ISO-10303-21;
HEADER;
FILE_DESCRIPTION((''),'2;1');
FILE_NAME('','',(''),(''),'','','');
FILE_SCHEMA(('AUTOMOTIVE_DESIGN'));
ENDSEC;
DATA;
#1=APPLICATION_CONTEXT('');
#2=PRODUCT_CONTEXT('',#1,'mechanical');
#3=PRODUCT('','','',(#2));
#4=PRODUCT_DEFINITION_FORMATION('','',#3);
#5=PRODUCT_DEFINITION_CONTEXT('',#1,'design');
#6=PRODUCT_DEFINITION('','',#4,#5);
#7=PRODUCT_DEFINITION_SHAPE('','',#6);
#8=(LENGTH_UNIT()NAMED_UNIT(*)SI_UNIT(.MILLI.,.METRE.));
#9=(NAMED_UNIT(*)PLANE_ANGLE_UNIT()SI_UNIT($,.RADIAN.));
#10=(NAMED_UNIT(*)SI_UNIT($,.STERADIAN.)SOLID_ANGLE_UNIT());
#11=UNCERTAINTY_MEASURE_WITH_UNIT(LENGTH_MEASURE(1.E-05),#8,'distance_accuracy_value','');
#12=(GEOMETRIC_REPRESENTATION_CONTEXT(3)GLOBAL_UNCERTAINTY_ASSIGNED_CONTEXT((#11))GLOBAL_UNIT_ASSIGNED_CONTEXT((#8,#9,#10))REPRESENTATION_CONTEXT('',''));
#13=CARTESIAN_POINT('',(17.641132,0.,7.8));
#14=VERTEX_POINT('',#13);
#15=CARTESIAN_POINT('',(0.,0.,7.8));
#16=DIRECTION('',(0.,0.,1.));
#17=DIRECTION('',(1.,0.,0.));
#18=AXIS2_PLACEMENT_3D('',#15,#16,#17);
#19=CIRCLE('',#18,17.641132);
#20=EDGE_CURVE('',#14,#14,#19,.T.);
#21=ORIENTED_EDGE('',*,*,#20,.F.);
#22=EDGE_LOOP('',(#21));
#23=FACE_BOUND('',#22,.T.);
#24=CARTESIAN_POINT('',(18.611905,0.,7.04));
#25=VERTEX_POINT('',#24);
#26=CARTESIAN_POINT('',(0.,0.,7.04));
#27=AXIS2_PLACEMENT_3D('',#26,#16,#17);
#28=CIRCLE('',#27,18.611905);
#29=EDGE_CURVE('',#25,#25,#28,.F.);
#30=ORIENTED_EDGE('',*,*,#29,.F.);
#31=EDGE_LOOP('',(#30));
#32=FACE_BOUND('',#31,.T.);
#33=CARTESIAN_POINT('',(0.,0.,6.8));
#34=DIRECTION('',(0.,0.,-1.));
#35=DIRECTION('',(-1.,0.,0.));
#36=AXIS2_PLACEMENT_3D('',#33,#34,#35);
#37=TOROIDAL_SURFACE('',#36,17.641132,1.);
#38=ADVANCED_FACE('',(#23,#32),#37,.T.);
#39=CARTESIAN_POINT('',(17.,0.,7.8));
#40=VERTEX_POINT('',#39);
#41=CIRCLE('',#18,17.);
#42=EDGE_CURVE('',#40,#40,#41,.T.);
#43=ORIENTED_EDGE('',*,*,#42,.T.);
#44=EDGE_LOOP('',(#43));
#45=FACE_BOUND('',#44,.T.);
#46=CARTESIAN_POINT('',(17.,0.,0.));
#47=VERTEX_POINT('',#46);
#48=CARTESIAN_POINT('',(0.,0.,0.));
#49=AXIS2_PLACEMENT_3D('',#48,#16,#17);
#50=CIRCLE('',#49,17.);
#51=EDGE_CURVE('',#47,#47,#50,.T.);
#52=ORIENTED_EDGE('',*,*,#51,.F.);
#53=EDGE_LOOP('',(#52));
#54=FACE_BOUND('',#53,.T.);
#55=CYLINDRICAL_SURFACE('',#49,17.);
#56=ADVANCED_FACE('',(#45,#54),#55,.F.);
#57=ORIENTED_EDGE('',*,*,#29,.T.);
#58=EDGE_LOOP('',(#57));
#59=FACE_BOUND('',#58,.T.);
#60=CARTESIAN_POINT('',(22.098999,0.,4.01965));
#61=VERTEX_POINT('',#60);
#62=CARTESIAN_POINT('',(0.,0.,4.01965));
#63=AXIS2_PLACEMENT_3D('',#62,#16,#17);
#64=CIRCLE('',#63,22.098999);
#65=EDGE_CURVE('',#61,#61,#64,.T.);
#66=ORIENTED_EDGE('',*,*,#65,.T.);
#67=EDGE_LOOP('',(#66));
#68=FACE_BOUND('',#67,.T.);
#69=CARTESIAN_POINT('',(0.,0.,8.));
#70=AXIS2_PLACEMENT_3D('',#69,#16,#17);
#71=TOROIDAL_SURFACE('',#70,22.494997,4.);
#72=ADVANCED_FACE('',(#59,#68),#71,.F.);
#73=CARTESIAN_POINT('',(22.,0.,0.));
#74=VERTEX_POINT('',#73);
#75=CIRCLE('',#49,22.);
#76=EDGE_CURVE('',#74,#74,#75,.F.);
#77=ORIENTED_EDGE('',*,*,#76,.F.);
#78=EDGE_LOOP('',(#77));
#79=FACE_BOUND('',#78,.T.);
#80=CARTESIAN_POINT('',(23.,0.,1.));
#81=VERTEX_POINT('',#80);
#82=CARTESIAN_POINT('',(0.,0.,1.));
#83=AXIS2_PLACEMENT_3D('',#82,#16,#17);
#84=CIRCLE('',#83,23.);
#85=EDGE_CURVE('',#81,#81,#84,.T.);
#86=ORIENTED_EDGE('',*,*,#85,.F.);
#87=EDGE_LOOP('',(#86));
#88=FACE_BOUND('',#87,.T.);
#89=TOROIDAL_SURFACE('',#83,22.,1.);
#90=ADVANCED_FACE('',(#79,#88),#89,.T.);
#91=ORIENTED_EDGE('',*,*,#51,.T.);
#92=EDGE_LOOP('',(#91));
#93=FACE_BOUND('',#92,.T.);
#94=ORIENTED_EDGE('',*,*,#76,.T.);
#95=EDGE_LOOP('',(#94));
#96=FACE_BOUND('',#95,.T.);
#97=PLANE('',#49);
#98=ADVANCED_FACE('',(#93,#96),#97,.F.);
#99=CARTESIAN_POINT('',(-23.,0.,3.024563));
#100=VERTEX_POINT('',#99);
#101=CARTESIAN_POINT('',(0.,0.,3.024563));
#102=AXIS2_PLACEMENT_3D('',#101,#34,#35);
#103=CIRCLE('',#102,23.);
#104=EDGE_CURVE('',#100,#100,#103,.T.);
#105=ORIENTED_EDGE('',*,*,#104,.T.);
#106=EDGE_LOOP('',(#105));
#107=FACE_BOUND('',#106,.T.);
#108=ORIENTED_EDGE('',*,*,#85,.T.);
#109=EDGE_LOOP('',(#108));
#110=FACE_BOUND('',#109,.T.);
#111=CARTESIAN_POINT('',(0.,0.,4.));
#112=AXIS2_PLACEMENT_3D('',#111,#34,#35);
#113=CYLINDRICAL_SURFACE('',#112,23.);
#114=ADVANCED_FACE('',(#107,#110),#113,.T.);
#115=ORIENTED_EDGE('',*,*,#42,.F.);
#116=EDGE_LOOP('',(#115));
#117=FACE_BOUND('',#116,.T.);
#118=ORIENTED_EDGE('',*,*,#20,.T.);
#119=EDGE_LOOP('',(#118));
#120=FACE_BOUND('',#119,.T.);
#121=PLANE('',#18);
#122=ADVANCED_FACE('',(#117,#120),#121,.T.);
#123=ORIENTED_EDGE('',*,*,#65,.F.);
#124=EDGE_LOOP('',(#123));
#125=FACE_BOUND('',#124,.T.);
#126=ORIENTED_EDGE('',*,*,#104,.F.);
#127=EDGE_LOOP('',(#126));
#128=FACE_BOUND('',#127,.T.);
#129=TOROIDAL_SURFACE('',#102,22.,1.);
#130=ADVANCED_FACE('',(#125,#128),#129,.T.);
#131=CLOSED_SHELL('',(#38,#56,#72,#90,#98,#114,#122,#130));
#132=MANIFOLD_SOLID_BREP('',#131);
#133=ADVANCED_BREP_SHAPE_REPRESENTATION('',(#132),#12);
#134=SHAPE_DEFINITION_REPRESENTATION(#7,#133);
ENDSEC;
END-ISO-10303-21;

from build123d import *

# Parameters (mm, degrees)
SKETCH1_R               = 23
BOSS_EXTRUDE1_DEPTH     = 4
CUT_EXTRUDE1_DEPTH      = 33.771939216
CUT_EXTRUDE1_DEPTH_BACK = 33.771939216
SKETCH2_R               = 17
BOSS_EXTRUDE2_START     = 3.8
SKETCH3_R               = 18.5
SKETCH3_R_2             = 17
BOSS_EXTRUDE2_DEPTH     = 3.8
FILLET1_R               = 4
FILLET2_R               = 1
FILLET3_R               = 1


with BuildPart() as part:
    # Sketch1 → Boss-Extrude1 (new body)
    with BuildSketch(Plane.XY):
        Circle(SKETCH1_R)
    extrude(amount=BOSS_EXTRUDE1_DEPTH)

    # Sketch2 → Cut-Extrude1 (cut, two sides: drawn at the far end of the back side and taken through both)
    with BuildSketch(Plane.XY.offset(4).offset(-CUT_EXTRUDE1_DEPTH_BACK)):
        Circle(SKETCH2_R)
    extrude(amount=CUT_EXTRUDE1_DEPTH + CUT_EXTRUDE1_DEPTH_BACK, mode=Mode.SUBTRACT)

    # Sketch3 → Boss-Extrude2 (add)
    with BuildSketch(Plane.XY.offset(4).offset(BOSS_EXTRUDE2_START)):
        with Locations(Location((0, 0, 0), (0, 0, 180))):
            Circle(SKETCH3_R)
        Circle(SKETCH3_R_2, mode=Mode.SUBTRACT)
    extrude(amount=-BOSS_EXTRUDE2_DEPTH)

    # Fillet1
    # the kernel refuses this fillet: 4 mm, written as the material it adds along each edge
    with BuildSketch(Plane(origin=(0, 0, 4), x_dir=(-1, 0, 0), z_dir=(0, 1, 0))) as fillet1_piece_1:
        with BuildLine():
            CenterArc((22.494996871, 4), FILLET1_R, 182.865983983, 87.134016017)
            Line((18.5, 3.8), (18.420100063, 3.796))
            ThreePointArc((18.420100063, 3.796), (18.42, 1.9), (18.42, 0))
            Line((18.42, 0), (18.5, -0.08))
            Line((18.5, -0.08), (22.494996871, -0.08))
            Line((22.494996871, -0.08), (22.494996871, 0))
        make_face()
    revolve(axis=Axis((0, 0, 4), (0, 0, 1)))

    # Fillet2
    fillet2_edges = [part.edges().sort_by_distance(p)[0] for p in [
        (18.5, 0, 7.8),
    ]]
    fillet(fillet2_edges, radius=FILLET2_R)

    # Fillet3
    fillet3_edges = [part.edges().sort_by_distance(p)[0] for p in [
        (-23, 0, 0),
        (-23, 0, 4),
    ]]
    fillet(fillet3_edges, radius=FILLET3_R)


solid = part.part
